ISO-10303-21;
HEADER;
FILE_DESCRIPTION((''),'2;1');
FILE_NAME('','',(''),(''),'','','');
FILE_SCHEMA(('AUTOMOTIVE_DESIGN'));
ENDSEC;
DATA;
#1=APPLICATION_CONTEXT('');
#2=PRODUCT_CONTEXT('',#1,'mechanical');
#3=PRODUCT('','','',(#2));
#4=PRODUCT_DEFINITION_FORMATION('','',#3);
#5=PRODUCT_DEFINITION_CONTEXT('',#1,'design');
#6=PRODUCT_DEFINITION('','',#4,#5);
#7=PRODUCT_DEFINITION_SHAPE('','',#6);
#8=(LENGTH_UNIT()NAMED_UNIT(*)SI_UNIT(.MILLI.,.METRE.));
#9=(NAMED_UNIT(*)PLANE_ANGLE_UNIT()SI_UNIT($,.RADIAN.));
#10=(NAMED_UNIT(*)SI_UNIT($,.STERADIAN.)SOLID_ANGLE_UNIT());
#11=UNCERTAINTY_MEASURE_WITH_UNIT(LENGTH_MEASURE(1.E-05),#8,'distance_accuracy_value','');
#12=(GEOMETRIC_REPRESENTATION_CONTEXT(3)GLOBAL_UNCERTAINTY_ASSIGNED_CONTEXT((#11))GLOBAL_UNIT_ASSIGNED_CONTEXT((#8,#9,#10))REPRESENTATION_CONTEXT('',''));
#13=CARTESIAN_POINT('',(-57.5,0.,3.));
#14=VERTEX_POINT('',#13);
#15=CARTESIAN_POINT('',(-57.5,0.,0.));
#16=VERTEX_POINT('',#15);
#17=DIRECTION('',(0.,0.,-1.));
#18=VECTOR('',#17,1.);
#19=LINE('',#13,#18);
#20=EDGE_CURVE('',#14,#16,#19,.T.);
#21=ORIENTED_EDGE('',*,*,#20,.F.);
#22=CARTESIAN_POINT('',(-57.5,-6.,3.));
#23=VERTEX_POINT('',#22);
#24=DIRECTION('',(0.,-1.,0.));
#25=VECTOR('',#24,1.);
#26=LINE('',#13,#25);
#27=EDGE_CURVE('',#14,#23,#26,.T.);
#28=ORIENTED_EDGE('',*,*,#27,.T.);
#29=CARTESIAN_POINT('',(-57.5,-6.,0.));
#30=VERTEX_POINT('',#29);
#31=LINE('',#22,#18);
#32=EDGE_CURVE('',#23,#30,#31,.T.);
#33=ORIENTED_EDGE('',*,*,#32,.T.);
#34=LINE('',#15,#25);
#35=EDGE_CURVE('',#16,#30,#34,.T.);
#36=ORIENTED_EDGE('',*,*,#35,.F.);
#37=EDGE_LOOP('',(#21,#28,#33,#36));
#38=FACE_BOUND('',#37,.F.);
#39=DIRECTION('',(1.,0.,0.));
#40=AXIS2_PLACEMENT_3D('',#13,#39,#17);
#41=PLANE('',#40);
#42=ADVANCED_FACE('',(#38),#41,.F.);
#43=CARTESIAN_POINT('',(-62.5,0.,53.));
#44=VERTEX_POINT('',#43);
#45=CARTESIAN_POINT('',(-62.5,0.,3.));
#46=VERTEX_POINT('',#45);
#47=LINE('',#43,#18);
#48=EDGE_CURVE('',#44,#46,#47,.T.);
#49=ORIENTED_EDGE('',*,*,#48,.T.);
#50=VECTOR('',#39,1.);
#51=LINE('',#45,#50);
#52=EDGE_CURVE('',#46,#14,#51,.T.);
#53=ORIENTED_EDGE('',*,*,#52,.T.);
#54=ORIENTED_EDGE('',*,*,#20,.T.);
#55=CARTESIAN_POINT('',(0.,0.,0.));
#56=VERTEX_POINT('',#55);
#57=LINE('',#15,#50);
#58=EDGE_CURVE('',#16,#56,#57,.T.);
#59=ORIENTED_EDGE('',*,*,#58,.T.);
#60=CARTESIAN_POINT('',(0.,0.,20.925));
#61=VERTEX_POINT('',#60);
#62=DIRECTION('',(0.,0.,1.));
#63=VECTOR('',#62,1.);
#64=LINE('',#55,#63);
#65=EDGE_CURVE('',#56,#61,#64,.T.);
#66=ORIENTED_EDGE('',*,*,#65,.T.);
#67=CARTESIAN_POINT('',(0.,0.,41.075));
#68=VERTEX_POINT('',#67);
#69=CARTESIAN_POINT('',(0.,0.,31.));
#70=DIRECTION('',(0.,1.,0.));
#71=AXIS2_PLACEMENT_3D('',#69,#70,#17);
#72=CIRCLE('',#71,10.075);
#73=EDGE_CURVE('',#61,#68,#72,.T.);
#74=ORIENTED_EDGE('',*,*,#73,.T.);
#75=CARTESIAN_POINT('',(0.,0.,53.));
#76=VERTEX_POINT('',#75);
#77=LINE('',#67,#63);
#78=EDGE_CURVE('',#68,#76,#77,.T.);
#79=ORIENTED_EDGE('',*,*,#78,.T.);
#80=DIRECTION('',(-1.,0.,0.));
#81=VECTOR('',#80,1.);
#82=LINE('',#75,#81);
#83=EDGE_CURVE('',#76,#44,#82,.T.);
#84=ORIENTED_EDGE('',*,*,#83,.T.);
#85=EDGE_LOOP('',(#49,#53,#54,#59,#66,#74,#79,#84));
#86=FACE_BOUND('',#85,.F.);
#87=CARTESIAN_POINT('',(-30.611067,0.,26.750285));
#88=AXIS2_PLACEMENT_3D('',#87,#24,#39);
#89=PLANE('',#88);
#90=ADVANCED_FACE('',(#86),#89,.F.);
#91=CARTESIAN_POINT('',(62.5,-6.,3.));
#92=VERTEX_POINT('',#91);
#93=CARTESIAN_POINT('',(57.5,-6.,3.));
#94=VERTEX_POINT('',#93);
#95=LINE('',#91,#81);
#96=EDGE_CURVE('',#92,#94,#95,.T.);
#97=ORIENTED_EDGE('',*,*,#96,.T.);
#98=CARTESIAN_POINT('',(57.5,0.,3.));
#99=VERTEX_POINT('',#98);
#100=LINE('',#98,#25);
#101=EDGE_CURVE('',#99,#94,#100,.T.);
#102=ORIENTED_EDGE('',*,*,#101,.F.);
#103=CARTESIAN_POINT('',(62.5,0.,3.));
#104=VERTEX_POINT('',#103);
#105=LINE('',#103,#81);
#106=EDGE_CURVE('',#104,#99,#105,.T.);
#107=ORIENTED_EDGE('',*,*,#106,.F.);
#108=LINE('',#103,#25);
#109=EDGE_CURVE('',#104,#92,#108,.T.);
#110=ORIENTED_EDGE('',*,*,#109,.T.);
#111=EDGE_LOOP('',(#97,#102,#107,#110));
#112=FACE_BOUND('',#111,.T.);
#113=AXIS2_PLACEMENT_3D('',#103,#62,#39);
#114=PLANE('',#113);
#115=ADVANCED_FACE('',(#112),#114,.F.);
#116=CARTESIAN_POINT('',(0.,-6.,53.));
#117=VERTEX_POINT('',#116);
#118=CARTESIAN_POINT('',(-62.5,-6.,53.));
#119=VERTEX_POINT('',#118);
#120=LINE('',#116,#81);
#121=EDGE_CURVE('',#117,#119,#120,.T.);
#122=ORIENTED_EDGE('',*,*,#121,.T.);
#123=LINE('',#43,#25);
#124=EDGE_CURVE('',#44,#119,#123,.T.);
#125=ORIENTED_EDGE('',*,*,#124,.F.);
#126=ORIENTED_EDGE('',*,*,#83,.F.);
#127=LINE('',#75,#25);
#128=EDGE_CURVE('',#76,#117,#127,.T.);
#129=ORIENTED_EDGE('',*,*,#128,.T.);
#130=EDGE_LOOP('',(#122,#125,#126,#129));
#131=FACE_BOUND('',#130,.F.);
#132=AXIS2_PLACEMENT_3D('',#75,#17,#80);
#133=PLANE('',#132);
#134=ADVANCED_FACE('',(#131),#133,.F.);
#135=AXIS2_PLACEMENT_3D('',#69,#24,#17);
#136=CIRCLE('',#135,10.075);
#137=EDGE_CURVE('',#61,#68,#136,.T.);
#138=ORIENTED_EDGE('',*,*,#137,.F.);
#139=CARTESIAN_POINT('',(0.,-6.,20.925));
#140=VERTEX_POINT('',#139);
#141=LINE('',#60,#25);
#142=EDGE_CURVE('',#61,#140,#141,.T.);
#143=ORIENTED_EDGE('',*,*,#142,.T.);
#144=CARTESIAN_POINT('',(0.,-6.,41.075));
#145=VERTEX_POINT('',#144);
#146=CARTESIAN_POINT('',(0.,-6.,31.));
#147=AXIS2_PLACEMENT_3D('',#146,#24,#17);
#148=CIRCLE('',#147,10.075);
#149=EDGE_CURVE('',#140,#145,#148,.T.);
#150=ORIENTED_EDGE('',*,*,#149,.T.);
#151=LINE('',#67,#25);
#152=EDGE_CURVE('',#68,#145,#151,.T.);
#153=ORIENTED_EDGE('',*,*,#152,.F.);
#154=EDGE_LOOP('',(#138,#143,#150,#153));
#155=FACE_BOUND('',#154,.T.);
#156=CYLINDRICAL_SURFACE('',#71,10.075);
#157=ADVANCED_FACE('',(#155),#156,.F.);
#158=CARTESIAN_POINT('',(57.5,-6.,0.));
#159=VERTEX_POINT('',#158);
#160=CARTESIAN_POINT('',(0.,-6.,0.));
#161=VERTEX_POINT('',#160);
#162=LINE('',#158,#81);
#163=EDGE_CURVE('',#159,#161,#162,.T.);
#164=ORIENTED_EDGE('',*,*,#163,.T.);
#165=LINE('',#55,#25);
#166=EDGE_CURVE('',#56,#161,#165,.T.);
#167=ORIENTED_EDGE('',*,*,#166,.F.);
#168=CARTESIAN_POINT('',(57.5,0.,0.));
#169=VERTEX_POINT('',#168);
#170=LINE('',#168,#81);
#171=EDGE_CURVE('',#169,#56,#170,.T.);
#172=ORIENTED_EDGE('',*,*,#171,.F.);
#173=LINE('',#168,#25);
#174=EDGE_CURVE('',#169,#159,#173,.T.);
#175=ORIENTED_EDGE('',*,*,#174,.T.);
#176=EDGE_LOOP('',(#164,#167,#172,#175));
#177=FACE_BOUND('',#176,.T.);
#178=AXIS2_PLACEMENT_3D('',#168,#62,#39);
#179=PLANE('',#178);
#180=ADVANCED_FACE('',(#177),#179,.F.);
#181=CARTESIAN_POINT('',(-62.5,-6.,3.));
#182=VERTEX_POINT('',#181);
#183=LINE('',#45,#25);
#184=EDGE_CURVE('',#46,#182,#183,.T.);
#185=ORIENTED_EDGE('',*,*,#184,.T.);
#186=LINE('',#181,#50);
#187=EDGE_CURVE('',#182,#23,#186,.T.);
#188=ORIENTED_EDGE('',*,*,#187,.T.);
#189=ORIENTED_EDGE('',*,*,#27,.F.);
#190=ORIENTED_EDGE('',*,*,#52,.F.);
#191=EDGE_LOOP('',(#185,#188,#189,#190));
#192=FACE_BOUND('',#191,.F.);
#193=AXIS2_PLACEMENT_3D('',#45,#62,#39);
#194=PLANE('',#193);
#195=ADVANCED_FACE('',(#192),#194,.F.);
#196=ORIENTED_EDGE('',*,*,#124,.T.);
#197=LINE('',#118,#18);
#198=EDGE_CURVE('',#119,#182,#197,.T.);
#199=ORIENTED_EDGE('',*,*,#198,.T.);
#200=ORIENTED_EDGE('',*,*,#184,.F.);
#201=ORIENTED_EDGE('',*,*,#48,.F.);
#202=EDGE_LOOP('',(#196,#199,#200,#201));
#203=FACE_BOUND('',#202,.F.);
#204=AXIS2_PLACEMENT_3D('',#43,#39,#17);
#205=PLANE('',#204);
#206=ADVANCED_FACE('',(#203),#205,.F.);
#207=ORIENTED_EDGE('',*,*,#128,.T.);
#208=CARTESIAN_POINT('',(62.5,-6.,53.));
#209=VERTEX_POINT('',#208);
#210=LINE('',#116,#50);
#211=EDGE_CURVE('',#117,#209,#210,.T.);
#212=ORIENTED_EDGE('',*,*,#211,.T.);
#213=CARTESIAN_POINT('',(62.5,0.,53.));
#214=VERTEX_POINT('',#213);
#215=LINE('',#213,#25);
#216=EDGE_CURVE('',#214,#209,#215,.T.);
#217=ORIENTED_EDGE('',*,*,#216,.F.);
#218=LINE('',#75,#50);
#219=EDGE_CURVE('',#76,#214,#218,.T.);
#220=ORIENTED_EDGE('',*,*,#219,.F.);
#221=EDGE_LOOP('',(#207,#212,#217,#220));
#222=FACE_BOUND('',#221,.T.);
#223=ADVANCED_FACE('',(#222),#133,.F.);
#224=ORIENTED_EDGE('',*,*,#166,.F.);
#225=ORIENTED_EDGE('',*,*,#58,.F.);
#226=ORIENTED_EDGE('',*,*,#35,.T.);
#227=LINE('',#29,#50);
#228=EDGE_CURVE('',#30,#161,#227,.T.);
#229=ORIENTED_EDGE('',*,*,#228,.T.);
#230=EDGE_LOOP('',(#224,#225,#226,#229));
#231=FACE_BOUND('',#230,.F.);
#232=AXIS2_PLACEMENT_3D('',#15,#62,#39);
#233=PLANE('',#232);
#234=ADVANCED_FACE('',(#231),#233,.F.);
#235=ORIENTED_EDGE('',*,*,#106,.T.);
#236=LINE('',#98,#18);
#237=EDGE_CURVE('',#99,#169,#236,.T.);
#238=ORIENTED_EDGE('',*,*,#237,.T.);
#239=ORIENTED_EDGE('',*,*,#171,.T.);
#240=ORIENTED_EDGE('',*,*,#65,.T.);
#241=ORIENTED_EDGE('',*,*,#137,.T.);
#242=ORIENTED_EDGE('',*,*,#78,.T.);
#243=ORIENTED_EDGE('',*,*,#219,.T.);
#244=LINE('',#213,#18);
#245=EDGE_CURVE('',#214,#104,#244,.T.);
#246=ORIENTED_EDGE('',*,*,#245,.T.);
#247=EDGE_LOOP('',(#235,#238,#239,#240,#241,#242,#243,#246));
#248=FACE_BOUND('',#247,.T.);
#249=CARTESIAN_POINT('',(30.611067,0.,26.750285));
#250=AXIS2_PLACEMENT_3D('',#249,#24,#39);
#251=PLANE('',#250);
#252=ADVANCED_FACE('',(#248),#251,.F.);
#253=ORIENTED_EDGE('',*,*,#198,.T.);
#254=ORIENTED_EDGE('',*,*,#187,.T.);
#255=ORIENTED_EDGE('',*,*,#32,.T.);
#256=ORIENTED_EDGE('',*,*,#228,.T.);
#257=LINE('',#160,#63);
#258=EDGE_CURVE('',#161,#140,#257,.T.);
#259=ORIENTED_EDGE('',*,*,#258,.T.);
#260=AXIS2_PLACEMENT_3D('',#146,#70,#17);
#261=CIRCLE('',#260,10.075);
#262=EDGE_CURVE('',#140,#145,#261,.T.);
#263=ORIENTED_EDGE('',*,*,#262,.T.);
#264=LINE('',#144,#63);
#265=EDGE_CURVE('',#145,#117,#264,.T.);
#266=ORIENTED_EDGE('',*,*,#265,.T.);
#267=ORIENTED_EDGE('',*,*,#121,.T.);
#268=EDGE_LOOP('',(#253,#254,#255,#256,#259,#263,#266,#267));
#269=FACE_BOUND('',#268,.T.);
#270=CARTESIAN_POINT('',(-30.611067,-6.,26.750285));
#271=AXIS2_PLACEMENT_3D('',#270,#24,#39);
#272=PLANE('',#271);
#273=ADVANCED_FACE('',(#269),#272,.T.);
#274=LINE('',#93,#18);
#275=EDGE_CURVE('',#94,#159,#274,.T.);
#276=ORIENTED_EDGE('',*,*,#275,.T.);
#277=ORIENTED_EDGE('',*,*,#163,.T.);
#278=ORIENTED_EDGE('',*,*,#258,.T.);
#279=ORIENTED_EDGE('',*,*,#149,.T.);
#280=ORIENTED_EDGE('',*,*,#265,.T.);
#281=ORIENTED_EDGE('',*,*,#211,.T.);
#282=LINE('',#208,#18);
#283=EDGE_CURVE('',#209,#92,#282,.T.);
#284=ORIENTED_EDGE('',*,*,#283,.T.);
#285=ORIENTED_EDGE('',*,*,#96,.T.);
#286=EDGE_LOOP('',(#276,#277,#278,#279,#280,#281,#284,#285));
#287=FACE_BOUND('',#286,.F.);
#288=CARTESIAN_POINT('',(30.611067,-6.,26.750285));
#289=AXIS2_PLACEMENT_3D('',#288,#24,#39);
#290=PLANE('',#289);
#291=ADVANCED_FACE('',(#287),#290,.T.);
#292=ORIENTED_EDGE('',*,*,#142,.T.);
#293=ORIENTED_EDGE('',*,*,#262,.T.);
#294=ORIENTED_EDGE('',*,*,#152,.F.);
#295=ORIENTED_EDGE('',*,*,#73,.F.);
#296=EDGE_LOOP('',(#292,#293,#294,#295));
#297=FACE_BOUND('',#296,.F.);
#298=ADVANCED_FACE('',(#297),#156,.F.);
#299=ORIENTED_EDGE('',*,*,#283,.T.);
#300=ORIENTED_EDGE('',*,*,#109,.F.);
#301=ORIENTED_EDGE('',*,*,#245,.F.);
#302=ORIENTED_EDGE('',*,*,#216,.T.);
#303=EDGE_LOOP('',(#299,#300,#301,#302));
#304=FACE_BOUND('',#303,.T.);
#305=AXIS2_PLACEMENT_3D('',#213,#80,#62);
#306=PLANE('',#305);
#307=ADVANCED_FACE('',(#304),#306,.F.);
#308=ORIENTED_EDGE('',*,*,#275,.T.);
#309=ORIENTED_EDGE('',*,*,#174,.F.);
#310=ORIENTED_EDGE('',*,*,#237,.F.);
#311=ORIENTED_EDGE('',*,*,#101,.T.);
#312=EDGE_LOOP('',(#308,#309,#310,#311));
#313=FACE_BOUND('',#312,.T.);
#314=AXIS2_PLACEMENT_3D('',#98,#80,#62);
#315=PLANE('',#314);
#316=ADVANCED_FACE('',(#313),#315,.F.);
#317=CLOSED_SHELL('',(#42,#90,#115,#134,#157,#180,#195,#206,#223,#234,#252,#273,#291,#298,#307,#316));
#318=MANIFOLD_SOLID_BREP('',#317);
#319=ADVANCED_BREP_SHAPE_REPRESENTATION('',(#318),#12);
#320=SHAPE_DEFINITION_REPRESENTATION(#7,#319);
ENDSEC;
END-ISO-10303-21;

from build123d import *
from build123d import SkipClean  # not in build123d's __all__

# Parameters (mm, degrees)
F1_DEPTH = 6


with BuildPart() as f1:
    # F0 (on Front) → F1 (new body)
    with BuildSketch(Plane.XZ):
        with BuildLine():
            Line((-57.5, 0), (0, 0))
            Line((0, 0), (0, 20.925))
            ThreePointArc((0, 20.925), (-10.075, 31), (0, 41.075))
            Line((0, 41.075), (0, 53))
            Line((0, 53), (-62.5, 53))
            Line((-62.5, 53), (-62.5, 3))
            Line((-62.5, 3), (-57.5, 3))
            Line((-57.5, 3), (-57.5, 0))
        make_face()
    extrude(amount=F1_DEPTH)

    # F2: F1 across face


with BuildPart() as f1_1:
    add(f1.part, clean=False)
    with SkipClean():  # cleaning this boolean's faces spoils the solid; the shape is the same uncleaned
        add(f1.part.mirror(Plane(origin=(0, -3, 47.0375), x_dir=(0, 1, 0), z_dir=(1, 0, 0))), clean=False)


solid = f1_1.part
